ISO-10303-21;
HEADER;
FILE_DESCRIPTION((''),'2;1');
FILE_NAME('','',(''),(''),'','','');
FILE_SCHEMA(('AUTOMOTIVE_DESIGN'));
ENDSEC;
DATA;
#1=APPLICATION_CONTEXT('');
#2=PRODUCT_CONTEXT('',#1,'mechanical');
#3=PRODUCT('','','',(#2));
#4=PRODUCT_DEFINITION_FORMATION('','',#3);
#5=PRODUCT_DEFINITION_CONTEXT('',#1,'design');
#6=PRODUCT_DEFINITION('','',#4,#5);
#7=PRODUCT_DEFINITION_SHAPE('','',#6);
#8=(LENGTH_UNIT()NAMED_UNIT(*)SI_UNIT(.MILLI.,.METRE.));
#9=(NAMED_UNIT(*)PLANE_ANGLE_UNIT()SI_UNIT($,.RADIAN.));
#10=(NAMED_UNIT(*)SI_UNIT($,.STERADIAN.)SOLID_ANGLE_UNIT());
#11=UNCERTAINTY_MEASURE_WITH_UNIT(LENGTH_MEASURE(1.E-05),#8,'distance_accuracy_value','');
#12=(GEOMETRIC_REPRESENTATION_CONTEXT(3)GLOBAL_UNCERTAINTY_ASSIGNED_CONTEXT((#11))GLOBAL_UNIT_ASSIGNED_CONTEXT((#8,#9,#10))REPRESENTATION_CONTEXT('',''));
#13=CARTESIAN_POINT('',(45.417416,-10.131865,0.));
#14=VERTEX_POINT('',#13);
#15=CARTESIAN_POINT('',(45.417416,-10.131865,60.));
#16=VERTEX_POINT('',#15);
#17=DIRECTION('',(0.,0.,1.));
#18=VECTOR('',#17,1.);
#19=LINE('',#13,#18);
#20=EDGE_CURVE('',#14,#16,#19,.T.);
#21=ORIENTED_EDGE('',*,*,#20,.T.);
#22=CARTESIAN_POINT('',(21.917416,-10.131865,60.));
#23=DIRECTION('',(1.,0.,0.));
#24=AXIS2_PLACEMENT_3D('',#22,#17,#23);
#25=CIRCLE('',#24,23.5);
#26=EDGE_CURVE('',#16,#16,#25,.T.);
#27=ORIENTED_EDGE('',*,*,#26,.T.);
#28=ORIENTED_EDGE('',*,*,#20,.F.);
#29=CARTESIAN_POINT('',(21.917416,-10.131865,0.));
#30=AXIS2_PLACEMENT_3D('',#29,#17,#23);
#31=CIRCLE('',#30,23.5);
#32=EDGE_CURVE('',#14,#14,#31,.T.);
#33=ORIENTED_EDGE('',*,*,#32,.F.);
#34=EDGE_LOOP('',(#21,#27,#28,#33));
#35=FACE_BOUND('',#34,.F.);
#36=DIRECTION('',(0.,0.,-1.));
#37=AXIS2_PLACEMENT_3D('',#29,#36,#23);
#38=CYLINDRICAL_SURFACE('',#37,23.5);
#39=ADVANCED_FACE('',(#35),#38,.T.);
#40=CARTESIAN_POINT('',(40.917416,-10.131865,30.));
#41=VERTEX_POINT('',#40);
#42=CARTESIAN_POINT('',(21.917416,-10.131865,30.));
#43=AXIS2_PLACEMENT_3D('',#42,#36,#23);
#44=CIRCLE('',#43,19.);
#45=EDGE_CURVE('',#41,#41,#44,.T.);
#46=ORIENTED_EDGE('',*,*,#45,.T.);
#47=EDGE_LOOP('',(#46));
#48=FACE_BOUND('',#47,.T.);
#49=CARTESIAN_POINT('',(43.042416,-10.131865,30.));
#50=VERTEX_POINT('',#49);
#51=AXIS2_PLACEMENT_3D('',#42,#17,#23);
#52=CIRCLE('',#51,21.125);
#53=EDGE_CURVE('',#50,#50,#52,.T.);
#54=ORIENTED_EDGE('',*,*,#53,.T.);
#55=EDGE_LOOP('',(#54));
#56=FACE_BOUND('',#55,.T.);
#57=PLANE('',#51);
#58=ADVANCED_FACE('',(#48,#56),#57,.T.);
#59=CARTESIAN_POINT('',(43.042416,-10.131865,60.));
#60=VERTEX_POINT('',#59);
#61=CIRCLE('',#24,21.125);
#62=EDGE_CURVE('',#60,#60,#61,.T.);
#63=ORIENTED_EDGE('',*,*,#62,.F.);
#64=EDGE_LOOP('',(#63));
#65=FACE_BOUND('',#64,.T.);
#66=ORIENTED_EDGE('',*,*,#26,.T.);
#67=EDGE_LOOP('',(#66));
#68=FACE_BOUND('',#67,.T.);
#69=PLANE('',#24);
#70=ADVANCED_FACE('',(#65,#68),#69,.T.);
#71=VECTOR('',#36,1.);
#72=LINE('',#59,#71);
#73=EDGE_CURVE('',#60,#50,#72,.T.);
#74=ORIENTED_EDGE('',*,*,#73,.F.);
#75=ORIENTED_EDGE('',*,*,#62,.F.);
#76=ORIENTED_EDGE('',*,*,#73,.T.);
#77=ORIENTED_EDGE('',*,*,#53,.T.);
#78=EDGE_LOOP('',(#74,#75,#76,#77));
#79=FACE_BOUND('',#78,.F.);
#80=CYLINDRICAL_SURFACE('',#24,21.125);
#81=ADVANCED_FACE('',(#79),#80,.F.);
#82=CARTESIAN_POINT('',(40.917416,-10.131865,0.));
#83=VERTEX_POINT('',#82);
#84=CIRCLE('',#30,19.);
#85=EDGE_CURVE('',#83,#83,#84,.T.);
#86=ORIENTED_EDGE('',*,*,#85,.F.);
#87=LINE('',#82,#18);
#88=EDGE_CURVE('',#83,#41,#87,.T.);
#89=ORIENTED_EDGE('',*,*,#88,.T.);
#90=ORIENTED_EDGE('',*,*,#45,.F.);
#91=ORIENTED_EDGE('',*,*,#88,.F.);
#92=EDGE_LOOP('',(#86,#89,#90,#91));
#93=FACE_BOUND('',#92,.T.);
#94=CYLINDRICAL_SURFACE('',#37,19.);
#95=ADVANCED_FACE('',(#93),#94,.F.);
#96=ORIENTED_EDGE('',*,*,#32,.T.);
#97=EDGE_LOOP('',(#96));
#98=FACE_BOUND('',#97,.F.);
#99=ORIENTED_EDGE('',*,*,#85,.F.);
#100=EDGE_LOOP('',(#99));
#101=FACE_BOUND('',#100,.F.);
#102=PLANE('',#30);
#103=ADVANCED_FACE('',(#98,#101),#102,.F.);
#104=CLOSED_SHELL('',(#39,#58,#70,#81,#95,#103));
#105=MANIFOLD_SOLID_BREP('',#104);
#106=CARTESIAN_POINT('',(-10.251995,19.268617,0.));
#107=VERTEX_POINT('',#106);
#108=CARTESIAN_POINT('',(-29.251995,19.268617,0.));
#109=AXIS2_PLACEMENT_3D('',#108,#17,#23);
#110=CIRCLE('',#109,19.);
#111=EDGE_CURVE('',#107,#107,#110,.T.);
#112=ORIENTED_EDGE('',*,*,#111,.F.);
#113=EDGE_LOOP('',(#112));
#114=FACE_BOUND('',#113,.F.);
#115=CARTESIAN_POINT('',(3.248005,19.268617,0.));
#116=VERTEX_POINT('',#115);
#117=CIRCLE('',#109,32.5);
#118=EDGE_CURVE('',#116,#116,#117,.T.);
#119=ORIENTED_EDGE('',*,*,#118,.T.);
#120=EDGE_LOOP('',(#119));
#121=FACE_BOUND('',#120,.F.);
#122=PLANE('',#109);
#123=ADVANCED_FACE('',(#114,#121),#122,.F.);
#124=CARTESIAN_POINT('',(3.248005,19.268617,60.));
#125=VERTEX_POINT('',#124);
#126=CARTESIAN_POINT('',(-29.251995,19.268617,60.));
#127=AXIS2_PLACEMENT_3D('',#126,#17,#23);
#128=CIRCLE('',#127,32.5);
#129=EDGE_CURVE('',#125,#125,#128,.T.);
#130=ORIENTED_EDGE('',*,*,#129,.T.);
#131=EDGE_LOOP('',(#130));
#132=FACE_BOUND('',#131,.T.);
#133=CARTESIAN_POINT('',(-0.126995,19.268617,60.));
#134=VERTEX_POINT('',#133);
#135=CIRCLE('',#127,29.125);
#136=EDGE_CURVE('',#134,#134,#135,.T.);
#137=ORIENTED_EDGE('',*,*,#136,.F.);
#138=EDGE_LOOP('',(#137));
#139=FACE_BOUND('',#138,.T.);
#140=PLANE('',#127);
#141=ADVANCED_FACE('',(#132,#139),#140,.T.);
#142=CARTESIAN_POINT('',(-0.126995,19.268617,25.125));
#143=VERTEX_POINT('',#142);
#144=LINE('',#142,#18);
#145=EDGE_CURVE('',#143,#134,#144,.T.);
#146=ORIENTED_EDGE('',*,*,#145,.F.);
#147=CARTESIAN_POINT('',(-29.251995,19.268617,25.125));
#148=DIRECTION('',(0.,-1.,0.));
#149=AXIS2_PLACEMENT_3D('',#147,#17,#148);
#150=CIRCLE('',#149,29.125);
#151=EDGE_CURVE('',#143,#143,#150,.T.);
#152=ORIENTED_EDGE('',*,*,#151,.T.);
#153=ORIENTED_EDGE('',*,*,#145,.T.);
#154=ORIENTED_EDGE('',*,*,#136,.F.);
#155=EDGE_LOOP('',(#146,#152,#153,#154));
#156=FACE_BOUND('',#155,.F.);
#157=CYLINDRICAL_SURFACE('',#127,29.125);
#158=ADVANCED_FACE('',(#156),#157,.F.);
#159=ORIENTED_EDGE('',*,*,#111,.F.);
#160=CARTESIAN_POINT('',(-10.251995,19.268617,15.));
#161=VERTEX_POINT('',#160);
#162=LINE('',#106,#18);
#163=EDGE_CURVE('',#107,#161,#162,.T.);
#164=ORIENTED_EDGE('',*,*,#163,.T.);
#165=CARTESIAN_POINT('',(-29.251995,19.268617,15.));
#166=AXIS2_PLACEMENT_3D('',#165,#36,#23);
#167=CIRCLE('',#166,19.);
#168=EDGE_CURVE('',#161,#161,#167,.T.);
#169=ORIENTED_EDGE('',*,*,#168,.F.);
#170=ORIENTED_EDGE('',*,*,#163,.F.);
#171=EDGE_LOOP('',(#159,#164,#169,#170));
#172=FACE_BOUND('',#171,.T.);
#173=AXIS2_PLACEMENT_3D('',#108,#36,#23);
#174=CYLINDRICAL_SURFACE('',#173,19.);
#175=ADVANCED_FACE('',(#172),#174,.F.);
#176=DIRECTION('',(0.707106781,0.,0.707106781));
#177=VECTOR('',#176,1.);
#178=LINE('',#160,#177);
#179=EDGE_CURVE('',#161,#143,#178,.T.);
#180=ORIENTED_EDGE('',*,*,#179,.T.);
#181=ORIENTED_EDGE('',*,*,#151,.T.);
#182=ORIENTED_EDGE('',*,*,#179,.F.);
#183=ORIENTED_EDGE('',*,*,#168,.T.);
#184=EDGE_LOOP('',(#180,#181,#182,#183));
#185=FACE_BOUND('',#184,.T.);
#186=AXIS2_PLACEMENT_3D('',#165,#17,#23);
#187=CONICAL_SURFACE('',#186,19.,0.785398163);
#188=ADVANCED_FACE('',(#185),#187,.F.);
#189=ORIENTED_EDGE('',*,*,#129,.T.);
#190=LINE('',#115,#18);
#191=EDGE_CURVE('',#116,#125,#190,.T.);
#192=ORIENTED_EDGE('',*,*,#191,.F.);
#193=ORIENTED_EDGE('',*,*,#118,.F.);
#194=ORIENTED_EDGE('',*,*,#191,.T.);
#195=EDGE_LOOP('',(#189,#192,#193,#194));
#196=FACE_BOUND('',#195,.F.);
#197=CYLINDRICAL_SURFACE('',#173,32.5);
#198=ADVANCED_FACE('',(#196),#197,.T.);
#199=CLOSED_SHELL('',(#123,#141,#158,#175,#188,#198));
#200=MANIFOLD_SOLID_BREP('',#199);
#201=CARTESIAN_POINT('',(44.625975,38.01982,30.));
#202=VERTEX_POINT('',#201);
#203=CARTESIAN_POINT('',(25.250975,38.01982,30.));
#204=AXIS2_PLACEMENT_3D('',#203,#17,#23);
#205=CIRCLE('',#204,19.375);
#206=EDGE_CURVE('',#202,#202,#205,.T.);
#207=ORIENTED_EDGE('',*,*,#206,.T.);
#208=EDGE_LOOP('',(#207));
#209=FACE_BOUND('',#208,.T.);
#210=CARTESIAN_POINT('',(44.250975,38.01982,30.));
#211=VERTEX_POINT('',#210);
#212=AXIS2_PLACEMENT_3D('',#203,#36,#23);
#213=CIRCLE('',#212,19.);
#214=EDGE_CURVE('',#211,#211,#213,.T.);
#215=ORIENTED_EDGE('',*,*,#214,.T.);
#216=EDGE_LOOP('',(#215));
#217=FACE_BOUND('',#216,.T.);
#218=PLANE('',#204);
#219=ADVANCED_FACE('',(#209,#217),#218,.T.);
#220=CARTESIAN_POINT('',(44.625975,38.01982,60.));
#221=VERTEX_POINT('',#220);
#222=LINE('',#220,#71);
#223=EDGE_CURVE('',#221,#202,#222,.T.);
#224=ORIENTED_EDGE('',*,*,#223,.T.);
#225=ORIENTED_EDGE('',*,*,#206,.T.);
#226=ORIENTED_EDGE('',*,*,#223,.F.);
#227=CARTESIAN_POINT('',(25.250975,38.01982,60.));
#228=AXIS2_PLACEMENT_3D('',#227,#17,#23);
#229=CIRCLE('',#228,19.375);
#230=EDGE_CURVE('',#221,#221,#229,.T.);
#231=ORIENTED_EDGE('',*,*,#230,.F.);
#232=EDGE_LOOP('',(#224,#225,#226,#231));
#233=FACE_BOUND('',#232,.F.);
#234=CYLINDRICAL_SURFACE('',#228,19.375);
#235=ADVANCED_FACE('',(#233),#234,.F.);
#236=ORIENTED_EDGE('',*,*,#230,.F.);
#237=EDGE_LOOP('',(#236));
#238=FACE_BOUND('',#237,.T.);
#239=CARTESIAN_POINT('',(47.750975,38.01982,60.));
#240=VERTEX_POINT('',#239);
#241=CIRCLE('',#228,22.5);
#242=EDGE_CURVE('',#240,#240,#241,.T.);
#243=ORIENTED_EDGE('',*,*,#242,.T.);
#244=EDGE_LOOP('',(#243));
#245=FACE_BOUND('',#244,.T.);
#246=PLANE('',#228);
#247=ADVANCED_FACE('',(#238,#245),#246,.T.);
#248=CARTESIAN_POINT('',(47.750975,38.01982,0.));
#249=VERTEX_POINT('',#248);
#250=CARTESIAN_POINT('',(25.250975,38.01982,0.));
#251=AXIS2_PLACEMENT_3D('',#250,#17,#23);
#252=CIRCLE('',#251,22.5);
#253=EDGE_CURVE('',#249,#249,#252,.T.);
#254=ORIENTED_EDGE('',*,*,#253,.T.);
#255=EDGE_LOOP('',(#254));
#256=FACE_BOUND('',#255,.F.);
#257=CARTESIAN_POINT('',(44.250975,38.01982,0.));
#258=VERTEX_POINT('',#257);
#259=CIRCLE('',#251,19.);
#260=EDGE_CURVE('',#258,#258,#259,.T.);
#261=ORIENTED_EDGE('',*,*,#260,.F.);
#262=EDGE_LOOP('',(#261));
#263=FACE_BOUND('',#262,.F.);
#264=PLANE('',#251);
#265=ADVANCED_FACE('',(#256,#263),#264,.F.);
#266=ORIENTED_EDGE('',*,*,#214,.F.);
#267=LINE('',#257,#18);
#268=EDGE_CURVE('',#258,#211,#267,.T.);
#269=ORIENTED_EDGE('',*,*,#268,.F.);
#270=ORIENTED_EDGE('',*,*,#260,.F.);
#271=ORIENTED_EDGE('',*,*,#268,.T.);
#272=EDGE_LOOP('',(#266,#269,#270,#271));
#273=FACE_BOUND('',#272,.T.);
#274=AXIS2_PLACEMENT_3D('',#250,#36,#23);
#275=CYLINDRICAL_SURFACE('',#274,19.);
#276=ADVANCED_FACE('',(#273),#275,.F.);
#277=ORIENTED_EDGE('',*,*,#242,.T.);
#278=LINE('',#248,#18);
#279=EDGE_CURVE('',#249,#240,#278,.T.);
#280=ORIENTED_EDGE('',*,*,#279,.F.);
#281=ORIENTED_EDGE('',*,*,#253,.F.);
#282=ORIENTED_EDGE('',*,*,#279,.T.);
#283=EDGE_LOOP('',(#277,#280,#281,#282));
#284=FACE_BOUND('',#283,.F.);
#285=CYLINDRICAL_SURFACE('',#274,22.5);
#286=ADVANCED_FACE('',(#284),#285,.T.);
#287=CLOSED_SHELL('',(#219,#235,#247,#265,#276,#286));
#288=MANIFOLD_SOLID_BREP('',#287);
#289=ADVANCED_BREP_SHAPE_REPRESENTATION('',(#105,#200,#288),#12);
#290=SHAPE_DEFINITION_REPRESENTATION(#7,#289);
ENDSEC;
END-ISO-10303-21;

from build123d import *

# Parameters (mm, degrees)
F0_R        = 32.5
F1_DEPTH    = 60
F0_R_2      = 22.5
F0_R_3      = 23.5
F2_R        = 19
F3_DEPTH    = 60
F5_R        = 29.125
F5_R_2      = 19.375
F5_R_3      = 21.125
F6_DEPTH    = 30
F7_S5_R     = 29.125
F7_T6_DEPTH = 50


# Not quite as in the source:
# - a fillet or chamfer that OpenCascade refuses, or shapes differently, is made with other operations: its cross-section is extruded or revolved along the edge and cut away or added


with BuildPart() as f1:
    # F0 (on Top) → F1 (new body)
    with BuildSketch(Plane.XY):
        with Locations((-29.2519945651, 19.268617034)):
            Circle(F0_R)
    extrude(amount=F1_DEPTH)


with BuildPart() as f1b:
    # F0 (on Top) → F1, piece 2 (new body)
    with BuildSketch(Plane.XY):
        with Locations((25.2509750426, 38.0198201165)):
            Circle(F0_R_2)
    extrude(amount=F1_DEPTH)


with BuildPart() as f1c:
    # F0 (on Top) → F1, piece 3 (new body)
    with BuildSketch(Plane.XY):
        with Locations((21.9174157828, -10.1318648085)):
            Circle(F0_R_3)
    extrude(amount=F1_DEPTH)


with BuildPart() as f3_tool:
    # F2 (on Top) → F3 (new body, through all)
    with BuildSketch(Plane.XY):
        with Locations((-29.2519945651, 19.268617034)):
            Circle(F2_R)
        with Locations((25.2509750426, 38.0198201165)):
            Circle(F2_R)
        with Locations((21.9174157828, -10.1318648085)):
            Circle(F2_R)
    extrude(amount=F3_DEPTH)


with BuildPart() as f1_1:
    add(f1.part)

    # F3: cut by f3_tool
    add(f3_tool.part, mode=Mode.SUBTRACT)


with BuildPart() as f1b_1:
    add(f1b.part)

    # F3: cut by f3_tool
    add(f3_tool.part, mode=Mode.SUBTRACT)


with BuildPart() as f1c_1:
    add(f1c.part)

    # F3: cut by f3_tool
    add(f3_tool.part, mode=Mode.SUBTRACT)


with BuildPart() as f6_tool:
    # F5 (on offset) → F6 (new body)
    with BuildSketch(Plane.XY.offset(60)):
        with Locations((-29.2519945651, 19.268617034)):
            Circle(F5_R)
        with Locations((25.2509750426, 38.0198201165)):
            Circle(F5_R_2)
        with Locations((21.9174157828, -10.1318648085)):
            Circle(F5_R_3)
    extrude(amount=-F6_DEPTH)


with BuildPart() as f1_2:
    add(f1_1.part)

    # F6: cut by f6_tool
    add(f6_tool.part, mode=Mode.SUBTRACT)

    # F7: chamfer of 15 on 1 edges, made by hand


with BuildPart() as f1b_2:
    add(f1b_1.part)

    # F6: cut by f6_tool
    add(f6_tool.part, mode=Mode.SUBTRACT)


with BuildPart() as f1c_2:
    add(f1c_1.part)

    # F6: cut by f6_tool
    add(f6_tool.part, mode=Mode.SUBTRACT)


with BuildPart() as f7_tool2:
    # F7_s3 → F7_t4 (revolve)
    with BuildSketch(Plane.XZ.offset(-19.268617034)):
        Polygon((-10.2519945651, 15), (4.7480054349, 30), (-10.2519945651, 30), align=None)
    revolve(axis=Axis((-29.2519945651, 19.268617034, 30), (0, 0, -1)))

    # F7_s5 → F7_t6 (intersect, symmetric)
    with BuildSketch(Plane.XY.offset(22.5)):
        with Locations((-29.2519945651, 19.268617034)):
            Circle(F7_S5_R)
    extrude(amount=F7_T6_DEPTH, both=True, mode=Mode.INTERSECT)


with BuildPart() as f1_3:
    add(f1_2.part)

    # F7_t1: cut F7_tool2
    add(f7_tool2.part, mode=Mode.SUBTRACT)


solid = Compound([f1b_2.part, f1c_2.part, f1_3.part])
